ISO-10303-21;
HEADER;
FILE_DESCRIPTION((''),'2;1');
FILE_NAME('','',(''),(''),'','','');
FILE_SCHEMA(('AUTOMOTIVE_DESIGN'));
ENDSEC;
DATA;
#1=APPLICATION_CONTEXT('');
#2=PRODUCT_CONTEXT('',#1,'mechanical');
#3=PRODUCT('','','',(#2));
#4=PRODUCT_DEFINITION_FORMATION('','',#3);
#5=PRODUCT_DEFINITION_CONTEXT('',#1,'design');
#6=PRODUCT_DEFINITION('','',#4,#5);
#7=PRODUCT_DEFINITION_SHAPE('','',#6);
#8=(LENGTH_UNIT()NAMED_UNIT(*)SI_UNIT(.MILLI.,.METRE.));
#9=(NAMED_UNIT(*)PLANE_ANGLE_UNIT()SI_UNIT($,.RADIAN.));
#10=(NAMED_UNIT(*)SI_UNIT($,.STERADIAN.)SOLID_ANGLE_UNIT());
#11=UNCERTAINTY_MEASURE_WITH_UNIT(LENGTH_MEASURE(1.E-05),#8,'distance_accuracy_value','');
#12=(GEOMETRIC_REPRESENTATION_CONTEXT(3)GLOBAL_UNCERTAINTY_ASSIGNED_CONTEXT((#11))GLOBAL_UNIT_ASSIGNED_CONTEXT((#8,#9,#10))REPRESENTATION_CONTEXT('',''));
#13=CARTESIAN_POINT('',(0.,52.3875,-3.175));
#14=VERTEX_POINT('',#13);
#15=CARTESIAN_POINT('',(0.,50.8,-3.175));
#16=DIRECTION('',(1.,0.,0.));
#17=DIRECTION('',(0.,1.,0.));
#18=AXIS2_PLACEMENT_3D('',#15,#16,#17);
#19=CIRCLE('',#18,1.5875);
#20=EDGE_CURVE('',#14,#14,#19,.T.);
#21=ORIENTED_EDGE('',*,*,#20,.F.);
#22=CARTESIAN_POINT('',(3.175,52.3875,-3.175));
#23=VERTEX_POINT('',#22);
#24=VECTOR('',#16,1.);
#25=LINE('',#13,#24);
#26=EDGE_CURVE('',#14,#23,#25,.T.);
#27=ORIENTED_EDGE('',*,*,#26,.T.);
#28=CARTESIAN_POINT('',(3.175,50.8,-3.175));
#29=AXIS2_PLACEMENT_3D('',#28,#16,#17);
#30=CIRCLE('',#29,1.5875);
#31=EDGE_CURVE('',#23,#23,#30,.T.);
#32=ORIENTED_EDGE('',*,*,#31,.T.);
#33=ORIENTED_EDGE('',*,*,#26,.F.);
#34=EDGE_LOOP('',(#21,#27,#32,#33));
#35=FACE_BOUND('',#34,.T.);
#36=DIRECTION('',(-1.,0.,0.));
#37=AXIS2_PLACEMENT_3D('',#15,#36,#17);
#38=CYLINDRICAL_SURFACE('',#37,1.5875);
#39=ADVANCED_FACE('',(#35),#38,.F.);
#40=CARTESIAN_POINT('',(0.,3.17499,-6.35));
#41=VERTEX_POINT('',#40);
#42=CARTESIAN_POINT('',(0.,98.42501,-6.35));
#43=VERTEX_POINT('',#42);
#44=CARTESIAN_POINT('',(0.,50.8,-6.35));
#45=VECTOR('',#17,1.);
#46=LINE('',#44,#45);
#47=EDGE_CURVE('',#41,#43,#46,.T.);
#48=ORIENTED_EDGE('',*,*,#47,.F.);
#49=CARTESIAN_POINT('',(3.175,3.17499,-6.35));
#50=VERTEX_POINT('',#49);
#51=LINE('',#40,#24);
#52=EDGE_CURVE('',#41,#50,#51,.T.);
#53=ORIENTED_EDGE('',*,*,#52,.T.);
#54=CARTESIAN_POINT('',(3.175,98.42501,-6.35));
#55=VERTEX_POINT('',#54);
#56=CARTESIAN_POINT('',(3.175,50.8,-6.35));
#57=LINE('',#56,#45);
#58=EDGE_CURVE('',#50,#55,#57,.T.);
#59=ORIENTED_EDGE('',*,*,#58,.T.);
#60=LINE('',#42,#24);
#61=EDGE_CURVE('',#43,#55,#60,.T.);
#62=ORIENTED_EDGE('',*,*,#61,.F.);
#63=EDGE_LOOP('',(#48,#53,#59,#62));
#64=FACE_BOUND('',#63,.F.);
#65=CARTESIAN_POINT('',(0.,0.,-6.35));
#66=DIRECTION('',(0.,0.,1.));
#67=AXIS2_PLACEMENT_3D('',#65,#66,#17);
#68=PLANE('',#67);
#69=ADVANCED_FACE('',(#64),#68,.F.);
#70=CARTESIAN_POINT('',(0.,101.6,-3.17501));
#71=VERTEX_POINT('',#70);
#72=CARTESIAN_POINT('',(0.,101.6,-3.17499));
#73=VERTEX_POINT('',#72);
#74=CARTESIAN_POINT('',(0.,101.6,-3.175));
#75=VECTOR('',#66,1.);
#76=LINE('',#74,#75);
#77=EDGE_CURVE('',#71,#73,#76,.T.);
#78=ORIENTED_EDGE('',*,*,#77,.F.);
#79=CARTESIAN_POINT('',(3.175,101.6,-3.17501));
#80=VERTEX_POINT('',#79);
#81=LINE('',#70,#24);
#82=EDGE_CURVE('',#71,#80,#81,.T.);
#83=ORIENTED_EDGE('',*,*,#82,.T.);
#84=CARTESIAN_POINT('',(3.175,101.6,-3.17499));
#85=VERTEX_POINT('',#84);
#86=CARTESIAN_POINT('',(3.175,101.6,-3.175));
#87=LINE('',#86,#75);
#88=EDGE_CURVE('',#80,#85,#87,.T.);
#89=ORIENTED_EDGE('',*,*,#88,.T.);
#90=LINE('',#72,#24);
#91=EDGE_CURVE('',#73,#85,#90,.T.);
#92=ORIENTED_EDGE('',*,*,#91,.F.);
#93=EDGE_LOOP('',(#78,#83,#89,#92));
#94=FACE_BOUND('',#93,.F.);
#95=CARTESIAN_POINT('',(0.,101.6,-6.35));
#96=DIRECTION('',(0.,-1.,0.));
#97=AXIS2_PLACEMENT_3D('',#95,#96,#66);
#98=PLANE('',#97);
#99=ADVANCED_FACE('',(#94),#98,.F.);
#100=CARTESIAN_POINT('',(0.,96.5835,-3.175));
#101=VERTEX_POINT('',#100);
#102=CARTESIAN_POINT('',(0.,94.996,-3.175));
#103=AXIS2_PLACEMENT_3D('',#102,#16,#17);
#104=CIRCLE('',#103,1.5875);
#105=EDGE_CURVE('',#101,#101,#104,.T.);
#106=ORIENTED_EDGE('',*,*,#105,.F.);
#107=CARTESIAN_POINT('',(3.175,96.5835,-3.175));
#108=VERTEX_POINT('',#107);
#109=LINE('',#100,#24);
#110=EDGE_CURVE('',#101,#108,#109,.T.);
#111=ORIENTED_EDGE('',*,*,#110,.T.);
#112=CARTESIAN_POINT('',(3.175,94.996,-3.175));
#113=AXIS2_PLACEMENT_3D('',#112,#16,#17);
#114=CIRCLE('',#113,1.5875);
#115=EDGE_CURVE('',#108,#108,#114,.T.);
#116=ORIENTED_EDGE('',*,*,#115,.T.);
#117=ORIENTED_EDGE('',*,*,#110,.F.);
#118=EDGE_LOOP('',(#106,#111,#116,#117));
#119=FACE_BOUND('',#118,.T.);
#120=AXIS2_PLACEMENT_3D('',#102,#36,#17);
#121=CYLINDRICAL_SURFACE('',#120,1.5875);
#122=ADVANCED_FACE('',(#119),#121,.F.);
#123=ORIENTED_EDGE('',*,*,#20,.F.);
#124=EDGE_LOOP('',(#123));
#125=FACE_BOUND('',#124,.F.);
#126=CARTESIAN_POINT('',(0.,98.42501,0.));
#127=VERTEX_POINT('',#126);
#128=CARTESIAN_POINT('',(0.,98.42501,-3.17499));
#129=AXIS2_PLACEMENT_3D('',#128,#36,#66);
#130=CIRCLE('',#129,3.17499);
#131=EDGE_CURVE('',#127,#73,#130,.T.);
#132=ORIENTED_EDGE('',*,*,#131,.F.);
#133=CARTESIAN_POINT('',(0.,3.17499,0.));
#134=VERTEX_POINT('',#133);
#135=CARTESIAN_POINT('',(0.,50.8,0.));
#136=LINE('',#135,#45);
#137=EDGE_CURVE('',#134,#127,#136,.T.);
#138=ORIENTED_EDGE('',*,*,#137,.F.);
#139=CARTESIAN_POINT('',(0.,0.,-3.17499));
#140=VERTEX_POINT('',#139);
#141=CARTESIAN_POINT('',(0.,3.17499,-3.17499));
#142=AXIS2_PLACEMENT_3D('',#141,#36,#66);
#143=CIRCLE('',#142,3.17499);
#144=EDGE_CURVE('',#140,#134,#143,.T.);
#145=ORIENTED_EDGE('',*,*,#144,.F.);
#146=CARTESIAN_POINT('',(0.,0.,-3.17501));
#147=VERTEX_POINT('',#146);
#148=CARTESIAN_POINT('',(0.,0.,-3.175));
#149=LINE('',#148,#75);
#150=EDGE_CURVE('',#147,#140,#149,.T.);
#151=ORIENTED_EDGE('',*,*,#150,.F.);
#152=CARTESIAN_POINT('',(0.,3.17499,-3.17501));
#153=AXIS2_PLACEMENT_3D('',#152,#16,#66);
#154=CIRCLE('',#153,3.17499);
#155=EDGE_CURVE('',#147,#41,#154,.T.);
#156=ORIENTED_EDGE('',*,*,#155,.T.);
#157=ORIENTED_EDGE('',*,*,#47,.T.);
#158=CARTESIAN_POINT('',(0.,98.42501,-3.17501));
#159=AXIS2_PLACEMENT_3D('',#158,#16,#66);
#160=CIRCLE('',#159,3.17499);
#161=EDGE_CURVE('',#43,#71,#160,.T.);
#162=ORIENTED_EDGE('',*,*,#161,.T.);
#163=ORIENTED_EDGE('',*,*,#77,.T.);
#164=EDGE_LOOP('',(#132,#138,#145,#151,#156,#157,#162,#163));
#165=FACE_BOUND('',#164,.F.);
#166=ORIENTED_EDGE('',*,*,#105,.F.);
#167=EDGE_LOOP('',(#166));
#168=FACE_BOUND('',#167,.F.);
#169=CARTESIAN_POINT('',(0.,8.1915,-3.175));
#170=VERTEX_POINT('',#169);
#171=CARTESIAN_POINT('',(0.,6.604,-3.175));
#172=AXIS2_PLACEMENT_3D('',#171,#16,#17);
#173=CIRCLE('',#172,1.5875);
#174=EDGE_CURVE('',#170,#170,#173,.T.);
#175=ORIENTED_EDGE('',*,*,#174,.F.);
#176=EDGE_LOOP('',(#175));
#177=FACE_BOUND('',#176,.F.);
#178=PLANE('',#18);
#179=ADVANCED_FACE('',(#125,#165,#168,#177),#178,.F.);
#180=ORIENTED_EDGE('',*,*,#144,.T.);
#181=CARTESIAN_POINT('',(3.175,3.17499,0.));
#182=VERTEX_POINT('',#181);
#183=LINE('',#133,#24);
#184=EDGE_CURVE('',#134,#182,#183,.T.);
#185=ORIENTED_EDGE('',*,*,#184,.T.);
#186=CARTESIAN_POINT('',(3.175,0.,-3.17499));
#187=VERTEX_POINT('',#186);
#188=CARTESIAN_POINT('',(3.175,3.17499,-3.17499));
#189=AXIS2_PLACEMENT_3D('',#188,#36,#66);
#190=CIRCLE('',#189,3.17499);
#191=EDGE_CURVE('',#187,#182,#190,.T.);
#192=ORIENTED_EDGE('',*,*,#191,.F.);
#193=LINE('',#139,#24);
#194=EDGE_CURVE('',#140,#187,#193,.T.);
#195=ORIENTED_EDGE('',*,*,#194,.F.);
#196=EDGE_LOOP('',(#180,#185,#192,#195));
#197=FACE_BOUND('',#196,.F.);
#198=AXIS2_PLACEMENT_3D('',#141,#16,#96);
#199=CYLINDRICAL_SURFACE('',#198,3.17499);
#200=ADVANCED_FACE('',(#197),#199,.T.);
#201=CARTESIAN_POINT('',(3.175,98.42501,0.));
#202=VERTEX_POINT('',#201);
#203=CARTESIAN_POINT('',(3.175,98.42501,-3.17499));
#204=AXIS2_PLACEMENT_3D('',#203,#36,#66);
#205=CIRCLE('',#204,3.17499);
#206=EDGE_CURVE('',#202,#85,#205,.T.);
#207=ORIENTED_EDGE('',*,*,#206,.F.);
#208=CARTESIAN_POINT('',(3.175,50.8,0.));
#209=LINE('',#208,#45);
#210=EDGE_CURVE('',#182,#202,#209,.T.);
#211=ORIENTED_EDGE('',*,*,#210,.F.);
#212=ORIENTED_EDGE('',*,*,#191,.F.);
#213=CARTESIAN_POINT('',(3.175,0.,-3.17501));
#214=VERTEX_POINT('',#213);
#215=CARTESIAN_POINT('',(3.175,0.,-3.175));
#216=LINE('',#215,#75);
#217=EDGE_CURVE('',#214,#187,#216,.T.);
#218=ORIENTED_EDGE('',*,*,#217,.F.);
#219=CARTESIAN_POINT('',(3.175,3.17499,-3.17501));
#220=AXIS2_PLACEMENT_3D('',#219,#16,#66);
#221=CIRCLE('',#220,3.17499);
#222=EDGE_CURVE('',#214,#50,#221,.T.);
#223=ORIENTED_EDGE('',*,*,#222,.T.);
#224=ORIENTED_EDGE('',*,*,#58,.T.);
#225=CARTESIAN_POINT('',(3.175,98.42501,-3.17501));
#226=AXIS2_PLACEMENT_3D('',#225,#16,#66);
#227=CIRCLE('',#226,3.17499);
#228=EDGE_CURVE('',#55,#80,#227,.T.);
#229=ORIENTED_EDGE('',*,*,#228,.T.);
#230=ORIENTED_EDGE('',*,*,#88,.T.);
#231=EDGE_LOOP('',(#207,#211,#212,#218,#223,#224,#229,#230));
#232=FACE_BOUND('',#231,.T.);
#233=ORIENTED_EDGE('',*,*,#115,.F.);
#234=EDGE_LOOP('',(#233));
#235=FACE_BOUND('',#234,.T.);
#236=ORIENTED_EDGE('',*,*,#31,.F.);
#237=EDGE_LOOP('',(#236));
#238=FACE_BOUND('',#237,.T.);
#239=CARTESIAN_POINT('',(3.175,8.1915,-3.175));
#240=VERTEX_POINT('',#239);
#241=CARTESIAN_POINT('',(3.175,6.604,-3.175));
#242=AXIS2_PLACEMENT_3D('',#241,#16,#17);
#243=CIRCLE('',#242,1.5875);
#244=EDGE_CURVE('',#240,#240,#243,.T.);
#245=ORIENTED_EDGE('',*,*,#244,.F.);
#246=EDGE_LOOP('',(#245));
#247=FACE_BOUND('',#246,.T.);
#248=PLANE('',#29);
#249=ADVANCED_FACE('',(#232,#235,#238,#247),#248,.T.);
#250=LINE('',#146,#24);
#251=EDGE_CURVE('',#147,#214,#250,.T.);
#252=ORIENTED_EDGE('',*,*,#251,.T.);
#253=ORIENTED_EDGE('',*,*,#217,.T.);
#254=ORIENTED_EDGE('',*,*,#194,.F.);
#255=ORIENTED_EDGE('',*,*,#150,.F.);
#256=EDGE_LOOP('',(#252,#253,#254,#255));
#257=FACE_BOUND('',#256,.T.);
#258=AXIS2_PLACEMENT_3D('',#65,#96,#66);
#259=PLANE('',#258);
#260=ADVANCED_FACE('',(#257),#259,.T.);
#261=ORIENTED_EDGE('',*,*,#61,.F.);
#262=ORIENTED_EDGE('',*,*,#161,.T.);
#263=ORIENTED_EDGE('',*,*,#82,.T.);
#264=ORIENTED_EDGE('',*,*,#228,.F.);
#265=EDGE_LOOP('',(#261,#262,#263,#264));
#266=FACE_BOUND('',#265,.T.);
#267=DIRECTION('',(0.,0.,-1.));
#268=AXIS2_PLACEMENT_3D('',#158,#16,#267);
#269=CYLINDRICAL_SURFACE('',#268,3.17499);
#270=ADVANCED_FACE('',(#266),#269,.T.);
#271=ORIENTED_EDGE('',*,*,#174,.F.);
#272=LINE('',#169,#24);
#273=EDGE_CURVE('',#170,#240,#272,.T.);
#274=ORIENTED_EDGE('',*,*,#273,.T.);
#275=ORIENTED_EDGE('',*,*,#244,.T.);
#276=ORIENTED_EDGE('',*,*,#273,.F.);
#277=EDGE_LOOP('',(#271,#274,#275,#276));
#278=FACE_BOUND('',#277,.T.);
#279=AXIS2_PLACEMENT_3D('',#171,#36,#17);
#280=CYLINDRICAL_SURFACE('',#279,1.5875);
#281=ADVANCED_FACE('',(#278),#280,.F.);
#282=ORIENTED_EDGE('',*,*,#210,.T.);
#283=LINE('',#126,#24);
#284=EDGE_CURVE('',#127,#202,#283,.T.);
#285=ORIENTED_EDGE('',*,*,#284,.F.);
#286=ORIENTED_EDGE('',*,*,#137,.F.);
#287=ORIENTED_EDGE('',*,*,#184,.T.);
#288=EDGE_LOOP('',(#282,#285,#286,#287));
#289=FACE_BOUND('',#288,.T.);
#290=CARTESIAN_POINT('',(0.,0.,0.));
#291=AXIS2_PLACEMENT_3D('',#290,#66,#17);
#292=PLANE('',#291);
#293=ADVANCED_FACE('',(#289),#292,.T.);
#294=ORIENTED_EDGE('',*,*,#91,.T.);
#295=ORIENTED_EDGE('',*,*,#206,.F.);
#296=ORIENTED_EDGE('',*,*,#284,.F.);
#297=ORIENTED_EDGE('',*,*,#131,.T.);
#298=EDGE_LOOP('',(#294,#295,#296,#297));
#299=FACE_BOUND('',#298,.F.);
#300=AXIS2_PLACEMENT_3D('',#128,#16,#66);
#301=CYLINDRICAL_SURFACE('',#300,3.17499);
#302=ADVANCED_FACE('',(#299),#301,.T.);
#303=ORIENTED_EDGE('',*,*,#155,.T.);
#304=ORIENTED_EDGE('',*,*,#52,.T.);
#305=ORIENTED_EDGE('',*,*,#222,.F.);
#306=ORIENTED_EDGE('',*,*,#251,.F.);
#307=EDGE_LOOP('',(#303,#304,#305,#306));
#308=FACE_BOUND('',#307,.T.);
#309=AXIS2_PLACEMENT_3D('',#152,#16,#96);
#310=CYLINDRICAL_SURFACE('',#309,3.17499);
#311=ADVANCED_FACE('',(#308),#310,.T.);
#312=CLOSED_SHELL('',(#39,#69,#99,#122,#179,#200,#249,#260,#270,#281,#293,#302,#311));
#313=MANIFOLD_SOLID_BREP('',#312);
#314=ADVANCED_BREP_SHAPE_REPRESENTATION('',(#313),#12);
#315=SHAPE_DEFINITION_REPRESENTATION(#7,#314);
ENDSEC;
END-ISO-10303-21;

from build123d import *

# Parameters (mm, degrees)
F0_W     = 101.6
F0_H     = 6.35
F0_R     = 1.5875
F1_DEPTH = 3.175
F2_R     = 3.17499
F3_R     = 3.17499


# Not quite as in the source:
# - a fillet or chamfer is up to 0.001 mm smaller than in the source, because OpenCascade refuses the exact size


with BuildPart() as f1:
    # F0 (on Right) → F1 (new body)
    with BuildSketch(Plane.YZ):
        with Locations((50.8, -3.175)):
            Rectangle(F0_W, F0_H)
        with Locations((6.604, -3.175)):
            Circle(F0_R, mode=Mode.SUBTRACT)
        with Locations((50.8, -3.175)):
            Circle(F0_R, mode=Mode.SUBTRACT)
        with Locations((94.996, -3.175)):
            Circle(F0_R, mode=Mode.SUBTRACT)
    extrude(amount=F1_DEPTH)

    # F2 (radius 3.175 in the source; OpenCascade refuses exactly that, so slightly less here)
    f2_edges = [f1.edges().sort_by_distance(p)[0] for p in [
        (1.5875, 0, 0),
        (1.5875, 0, -6.35),
    ]]
    fillet(f2_edges, radius=F2_R)

    # F3 (radius 3.175 in the source; OpenCascade refuses exactly that, so slightly less here)
    f3_edges = [f1.edges().sort_by_distance(p)[0] for p in [
        (1.5875, 101.6, 0),
        (1.5875, 101.6, -6.35),
    ]]
    fillet(f3_edges, radius=F3_R)


solid = f1.part
